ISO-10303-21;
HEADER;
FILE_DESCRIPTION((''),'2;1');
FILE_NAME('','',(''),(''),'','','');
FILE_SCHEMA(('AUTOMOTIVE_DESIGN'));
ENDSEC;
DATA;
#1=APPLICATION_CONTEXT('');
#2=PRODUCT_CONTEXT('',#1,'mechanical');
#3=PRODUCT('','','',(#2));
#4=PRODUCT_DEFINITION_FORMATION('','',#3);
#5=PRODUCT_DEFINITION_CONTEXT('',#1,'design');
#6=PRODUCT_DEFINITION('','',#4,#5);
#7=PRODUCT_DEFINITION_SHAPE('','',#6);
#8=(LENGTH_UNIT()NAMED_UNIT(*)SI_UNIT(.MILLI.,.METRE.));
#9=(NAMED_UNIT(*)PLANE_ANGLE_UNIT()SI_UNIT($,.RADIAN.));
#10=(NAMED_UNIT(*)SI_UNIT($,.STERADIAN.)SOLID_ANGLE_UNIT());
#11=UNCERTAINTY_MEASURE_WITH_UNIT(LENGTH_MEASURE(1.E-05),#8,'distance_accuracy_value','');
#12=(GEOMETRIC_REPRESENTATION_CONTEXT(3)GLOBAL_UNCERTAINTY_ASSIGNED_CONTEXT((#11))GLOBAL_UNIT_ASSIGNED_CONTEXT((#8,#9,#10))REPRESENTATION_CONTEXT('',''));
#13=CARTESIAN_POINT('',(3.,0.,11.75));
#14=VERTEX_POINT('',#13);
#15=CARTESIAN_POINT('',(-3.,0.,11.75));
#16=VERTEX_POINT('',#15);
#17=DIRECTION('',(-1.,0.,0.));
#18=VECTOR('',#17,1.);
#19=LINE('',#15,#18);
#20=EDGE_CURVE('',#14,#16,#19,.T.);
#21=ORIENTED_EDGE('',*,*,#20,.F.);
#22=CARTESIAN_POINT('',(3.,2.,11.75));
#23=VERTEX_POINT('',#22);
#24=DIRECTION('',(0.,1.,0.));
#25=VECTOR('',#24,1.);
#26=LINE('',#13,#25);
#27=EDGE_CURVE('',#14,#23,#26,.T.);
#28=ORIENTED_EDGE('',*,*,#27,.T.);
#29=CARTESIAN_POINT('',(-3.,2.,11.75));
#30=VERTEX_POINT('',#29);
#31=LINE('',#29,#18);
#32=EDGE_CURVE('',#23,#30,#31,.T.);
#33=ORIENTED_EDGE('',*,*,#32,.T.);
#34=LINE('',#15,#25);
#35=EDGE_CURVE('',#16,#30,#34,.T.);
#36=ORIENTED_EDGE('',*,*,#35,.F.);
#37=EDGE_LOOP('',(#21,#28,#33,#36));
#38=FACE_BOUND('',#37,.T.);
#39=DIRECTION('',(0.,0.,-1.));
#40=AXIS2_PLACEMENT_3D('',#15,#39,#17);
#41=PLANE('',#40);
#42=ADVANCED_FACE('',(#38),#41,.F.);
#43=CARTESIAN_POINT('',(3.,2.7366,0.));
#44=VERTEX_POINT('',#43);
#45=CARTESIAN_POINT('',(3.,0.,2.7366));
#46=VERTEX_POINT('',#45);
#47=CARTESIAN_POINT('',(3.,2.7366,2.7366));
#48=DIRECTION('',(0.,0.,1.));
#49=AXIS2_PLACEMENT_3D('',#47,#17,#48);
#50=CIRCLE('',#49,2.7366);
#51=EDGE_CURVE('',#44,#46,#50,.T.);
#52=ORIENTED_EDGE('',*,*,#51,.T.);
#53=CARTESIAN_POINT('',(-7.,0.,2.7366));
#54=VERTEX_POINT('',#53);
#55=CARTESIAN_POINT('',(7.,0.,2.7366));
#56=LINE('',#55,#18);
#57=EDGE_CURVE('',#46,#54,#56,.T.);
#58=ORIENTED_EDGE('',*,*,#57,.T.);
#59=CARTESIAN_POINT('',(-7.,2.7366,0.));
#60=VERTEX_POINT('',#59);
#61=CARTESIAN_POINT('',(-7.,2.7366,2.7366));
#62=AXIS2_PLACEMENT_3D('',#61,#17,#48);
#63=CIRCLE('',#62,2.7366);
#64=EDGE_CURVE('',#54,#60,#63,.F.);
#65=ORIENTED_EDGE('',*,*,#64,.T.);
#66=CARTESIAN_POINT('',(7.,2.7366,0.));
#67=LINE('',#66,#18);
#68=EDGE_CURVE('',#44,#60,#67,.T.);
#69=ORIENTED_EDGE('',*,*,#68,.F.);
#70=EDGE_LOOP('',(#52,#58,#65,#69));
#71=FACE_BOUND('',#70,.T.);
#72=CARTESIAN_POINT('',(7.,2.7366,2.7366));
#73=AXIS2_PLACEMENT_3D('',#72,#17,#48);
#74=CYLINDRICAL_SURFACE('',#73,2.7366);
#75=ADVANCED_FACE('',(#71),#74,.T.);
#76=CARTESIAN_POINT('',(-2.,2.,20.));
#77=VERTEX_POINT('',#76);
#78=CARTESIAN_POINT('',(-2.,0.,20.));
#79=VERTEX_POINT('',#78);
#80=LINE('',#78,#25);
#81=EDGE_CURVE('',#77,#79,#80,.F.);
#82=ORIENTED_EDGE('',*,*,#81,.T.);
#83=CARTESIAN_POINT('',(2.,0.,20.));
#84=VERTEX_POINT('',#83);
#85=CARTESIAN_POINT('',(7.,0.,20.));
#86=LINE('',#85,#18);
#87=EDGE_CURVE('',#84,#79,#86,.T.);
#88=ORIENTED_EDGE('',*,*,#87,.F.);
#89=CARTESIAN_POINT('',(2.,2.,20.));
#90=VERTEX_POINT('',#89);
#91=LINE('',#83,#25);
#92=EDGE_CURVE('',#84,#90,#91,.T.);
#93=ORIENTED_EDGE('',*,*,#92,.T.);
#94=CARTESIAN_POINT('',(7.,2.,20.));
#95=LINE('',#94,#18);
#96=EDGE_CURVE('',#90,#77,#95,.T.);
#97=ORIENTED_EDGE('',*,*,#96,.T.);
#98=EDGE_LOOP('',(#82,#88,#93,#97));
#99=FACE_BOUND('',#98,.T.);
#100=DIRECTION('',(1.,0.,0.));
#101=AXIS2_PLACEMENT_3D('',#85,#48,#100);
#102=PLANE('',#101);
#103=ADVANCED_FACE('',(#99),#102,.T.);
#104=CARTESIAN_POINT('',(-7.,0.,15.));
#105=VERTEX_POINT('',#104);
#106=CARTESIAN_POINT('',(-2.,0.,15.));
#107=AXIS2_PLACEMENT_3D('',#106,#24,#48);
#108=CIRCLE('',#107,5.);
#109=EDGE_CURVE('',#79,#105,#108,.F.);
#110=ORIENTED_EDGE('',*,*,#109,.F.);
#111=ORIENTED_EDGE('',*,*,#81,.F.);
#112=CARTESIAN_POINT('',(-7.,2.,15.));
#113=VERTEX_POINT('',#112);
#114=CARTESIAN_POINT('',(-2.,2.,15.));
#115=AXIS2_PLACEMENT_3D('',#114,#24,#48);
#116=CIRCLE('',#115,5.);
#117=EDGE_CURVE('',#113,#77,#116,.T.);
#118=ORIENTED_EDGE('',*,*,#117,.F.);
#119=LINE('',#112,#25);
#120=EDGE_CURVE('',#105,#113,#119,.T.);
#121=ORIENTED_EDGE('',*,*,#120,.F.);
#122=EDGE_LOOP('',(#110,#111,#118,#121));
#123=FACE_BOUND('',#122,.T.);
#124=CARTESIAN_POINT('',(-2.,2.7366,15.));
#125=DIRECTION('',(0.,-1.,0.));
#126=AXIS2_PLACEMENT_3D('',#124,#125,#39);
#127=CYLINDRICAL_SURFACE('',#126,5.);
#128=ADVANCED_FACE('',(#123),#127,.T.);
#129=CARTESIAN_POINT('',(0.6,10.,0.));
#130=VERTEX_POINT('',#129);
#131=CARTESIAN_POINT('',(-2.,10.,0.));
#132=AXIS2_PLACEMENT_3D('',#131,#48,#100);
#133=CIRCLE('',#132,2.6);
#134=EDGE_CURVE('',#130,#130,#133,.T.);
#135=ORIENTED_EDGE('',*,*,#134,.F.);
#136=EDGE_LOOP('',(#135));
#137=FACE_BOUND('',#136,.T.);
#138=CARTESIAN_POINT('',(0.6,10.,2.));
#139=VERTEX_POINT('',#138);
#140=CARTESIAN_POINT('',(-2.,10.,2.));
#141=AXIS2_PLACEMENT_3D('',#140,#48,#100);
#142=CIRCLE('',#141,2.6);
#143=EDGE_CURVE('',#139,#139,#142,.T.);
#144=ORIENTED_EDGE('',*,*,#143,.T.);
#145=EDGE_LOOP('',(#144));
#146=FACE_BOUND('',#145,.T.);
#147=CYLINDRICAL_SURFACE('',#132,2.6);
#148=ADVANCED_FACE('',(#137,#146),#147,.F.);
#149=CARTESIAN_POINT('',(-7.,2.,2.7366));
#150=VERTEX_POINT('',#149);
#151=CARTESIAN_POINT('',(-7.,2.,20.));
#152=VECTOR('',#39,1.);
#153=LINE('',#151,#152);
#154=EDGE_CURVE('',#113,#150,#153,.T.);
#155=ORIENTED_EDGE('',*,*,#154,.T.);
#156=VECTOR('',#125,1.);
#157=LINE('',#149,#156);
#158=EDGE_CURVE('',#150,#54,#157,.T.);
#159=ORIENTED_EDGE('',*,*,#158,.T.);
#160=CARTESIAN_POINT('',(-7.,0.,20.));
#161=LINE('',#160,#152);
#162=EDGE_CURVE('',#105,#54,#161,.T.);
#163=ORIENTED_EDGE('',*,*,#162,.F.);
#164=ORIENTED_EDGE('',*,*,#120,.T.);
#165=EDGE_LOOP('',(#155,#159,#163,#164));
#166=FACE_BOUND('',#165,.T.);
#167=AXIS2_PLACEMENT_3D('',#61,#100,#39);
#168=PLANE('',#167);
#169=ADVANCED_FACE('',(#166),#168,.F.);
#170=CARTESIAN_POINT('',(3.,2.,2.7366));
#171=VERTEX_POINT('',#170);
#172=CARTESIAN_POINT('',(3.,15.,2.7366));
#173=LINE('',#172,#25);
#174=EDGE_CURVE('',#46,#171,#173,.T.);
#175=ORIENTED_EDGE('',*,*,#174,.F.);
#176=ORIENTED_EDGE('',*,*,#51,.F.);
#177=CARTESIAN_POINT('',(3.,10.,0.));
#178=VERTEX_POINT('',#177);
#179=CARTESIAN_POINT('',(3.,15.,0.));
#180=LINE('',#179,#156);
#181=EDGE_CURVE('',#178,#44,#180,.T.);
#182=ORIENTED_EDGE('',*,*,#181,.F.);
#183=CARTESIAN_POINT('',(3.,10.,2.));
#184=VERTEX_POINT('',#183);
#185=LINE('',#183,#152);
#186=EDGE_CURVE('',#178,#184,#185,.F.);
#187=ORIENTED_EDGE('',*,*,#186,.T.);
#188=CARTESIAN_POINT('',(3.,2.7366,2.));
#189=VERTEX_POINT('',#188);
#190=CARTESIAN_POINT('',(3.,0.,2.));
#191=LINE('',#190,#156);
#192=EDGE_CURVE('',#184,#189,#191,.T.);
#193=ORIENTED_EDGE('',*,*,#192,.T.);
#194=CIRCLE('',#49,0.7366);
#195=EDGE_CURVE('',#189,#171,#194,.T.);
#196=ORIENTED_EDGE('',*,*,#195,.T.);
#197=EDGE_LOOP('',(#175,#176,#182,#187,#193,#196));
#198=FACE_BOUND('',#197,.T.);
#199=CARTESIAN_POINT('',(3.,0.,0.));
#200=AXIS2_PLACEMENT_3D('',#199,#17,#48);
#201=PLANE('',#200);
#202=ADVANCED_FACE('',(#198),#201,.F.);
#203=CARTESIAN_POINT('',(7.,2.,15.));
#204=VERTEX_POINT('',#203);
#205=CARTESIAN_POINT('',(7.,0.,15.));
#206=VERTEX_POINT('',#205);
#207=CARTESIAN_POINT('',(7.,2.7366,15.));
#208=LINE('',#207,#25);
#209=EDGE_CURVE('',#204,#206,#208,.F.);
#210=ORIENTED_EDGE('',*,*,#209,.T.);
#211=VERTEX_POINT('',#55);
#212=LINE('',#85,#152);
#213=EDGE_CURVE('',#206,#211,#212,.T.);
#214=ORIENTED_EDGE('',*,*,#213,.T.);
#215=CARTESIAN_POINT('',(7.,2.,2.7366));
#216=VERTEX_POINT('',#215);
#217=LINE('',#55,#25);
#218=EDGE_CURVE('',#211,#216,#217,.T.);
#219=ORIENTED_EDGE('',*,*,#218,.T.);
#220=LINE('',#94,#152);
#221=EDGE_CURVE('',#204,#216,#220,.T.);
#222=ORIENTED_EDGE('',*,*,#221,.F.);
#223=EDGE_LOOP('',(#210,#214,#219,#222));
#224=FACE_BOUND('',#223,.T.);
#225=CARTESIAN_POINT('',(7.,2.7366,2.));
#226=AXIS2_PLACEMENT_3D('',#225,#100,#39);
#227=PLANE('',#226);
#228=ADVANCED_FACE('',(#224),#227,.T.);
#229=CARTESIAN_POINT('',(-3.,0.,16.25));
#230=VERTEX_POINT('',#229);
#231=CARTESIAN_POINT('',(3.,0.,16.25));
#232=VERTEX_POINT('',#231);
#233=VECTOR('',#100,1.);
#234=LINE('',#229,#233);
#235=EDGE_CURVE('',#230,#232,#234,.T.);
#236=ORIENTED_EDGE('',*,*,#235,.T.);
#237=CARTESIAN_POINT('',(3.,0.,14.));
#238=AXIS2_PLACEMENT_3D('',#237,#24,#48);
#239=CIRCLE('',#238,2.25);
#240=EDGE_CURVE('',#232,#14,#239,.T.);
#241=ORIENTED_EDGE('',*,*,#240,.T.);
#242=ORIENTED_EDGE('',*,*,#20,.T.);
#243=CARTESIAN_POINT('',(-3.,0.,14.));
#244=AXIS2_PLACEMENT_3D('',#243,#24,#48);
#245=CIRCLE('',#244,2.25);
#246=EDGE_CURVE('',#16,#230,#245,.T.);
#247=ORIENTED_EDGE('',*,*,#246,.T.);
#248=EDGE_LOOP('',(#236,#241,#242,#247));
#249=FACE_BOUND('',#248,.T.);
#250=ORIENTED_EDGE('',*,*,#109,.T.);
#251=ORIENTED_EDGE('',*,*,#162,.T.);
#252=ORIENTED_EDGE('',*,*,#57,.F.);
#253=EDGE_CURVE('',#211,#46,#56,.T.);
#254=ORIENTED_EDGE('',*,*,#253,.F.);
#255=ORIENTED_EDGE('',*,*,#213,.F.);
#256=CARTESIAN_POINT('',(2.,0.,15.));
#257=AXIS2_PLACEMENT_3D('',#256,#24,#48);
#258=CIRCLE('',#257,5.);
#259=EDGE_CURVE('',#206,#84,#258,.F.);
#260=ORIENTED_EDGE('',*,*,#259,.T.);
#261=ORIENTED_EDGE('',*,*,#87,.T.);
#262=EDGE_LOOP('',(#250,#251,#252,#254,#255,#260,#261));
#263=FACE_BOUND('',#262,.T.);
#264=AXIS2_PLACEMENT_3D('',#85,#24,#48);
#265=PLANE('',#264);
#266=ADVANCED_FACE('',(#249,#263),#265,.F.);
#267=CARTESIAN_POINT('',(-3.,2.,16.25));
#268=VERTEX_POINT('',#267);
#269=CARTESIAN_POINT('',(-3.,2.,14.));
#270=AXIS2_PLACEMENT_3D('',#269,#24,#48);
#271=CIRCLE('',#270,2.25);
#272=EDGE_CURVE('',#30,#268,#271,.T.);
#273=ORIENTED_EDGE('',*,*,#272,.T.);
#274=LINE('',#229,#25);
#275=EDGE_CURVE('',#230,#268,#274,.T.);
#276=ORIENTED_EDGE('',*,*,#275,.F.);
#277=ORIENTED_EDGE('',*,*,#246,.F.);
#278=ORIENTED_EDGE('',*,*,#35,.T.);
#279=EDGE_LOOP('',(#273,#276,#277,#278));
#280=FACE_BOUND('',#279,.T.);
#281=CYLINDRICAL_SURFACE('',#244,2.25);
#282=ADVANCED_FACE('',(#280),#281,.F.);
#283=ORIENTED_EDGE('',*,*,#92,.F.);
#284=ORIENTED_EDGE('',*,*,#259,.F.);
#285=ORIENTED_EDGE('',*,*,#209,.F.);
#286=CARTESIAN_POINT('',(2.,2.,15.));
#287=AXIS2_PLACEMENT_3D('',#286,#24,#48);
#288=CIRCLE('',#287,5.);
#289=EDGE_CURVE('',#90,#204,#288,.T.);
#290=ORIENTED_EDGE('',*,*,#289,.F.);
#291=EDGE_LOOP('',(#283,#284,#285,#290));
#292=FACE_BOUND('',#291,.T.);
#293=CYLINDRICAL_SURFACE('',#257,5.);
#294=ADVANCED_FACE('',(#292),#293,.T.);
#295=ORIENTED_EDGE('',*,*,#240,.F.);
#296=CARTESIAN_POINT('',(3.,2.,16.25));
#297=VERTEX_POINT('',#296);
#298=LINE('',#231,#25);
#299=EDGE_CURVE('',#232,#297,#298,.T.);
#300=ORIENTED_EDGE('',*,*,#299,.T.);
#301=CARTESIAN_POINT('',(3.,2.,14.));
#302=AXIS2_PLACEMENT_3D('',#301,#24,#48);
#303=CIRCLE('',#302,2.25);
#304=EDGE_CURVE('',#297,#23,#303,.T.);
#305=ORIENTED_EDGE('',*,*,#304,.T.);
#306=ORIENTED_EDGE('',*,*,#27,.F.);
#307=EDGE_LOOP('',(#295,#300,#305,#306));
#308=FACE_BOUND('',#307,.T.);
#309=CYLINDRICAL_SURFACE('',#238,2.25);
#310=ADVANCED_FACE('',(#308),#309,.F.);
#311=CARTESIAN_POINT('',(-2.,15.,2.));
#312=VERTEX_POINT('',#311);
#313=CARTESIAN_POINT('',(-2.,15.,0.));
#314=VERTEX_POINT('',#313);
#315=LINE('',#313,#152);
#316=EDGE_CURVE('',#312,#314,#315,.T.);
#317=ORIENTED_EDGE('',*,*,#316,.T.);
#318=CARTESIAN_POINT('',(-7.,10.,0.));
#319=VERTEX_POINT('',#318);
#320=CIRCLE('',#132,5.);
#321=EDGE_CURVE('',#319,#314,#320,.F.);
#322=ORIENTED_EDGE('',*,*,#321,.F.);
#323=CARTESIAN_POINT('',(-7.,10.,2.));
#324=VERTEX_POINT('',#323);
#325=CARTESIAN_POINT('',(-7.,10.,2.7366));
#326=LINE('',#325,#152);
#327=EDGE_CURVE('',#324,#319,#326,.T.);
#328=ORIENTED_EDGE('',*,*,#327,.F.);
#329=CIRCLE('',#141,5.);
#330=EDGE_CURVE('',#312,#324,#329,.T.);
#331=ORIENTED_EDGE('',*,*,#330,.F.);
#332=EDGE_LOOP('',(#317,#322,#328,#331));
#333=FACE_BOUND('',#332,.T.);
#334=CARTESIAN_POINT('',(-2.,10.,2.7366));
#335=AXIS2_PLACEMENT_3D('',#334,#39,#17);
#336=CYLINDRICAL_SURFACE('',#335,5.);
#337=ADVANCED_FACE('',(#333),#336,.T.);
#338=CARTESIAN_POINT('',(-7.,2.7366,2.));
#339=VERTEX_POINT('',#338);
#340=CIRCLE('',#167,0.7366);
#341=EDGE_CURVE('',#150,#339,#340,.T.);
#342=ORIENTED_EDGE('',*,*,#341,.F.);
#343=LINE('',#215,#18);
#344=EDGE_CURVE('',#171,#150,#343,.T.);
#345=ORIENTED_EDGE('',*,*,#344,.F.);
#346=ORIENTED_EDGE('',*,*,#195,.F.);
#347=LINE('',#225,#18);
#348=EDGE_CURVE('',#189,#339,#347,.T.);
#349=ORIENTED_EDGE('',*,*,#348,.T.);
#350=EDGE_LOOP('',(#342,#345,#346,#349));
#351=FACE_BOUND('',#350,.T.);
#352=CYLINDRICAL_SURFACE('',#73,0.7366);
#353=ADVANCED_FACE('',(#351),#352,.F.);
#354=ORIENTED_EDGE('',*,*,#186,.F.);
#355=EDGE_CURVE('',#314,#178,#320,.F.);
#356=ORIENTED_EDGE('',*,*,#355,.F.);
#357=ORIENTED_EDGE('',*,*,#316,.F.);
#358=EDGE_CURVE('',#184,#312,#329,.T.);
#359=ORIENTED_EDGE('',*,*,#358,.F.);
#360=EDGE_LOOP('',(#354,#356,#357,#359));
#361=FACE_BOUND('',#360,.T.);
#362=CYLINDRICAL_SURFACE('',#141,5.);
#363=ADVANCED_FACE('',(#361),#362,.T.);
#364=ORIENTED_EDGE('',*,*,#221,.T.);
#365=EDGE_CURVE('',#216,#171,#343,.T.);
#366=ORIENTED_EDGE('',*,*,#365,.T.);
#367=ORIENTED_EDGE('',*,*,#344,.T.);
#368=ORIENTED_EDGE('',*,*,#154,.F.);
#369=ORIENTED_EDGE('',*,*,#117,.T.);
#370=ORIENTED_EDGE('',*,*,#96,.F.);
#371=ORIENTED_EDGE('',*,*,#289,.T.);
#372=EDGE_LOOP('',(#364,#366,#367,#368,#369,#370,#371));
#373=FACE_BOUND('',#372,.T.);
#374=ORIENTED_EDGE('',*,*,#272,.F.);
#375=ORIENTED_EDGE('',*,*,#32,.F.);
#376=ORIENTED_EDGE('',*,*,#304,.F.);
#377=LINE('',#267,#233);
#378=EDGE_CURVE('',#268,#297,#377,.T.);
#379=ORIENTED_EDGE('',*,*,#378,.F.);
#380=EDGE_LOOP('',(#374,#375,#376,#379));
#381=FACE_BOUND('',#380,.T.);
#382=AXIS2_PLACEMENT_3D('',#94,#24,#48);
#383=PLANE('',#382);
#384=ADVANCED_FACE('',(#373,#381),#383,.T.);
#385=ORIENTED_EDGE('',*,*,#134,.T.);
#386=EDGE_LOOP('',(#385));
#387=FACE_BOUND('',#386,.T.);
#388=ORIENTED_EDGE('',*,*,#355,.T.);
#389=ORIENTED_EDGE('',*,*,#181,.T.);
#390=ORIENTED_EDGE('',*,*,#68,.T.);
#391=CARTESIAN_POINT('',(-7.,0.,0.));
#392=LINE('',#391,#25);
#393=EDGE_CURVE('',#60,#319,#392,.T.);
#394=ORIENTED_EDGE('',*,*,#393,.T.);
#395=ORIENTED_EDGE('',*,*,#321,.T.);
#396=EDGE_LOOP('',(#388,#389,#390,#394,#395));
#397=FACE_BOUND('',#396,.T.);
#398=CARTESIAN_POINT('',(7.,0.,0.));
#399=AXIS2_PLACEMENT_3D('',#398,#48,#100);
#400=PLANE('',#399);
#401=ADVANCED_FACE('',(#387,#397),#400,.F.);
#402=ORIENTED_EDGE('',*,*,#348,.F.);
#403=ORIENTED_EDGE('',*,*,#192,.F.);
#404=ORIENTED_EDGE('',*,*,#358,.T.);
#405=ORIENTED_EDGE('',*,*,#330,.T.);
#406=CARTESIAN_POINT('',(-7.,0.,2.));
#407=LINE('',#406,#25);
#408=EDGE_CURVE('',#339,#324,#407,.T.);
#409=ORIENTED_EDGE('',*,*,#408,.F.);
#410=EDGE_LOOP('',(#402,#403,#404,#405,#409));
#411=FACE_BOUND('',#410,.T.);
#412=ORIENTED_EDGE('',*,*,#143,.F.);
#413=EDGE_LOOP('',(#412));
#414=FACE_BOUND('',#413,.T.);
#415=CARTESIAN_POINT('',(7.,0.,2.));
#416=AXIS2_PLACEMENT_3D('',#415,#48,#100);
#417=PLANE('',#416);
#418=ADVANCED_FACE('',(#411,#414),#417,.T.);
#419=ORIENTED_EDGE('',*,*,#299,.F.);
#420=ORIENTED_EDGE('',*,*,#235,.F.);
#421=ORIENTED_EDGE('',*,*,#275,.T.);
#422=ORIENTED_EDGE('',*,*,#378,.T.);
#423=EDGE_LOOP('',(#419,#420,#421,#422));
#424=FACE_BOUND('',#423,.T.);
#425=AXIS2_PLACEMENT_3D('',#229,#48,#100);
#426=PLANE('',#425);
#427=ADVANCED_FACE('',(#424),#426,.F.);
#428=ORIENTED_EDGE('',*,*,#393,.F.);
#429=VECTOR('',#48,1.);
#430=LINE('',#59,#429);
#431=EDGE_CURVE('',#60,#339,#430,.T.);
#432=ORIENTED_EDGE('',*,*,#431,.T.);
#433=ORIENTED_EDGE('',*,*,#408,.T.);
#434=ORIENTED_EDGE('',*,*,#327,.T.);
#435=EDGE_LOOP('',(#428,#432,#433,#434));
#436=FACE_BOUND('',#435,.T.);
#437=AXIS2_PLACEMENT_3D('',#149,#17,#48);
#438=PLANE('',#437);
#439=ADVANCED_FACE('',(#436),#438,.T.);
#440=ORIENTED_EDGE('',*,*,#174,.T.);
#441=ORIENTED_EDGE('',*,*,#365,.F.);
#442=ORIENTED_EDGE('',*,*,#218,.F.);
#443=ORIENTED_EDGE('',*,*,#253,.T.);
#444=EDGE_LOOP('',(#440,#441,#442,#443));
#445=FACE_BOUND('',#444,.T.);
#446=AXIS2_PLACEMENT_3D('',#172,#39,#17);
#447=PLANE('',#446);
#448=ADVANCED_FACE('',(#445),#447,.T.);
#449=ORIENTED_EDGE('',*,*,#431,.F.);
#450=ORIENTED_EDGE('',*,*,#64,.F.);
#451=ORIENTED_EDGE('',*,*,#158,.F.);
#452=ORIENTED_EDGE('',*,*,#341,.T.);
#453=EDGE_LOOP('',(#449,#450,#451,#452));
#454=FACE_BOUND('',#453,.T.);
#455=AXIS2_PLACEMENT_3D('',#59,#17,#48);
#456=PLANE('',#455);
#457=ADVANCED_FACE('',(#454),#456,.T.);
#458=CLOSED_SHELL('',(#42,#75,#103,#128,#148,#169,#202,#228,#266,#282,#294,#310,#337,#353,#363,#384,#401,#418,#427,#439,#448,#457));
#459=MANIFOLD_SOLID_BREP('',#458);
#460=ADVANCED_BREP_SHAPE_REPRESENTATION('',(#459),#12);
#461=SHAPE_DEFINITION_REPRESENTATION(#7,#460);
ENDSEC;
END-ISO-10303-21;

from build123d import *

# Parameters (mm, degrees)
SM_BASE_FLANGE_1_DEPTH = 7
CUT_EXTRUDE_1_DEPTH    = 25.859605789
SKETCH_4_W             = 2.7366
SKETCH_4_H             = 15
CUT_EXTRUDE_2_DEPTH    = 4
FILLET_1_R             = 5
SKETCH_5_R             = 2.6
CUT_EXTRUDE_3_DEPTH    = 25.454038521


# Sheet-metal steps are written as plain solids
with BuildPart() as part:
    # Sketch 1 → 基体-法兰1 (new, symmetric)
    with BuildSketch(Plane(origin=(0, 0, 0), x_dir=(0, 0, -1), z_dir=(1, 0, 0))):
        with BuildLine():
            Line((-20, 0), (-2.7366, 0))
            ThreePointArc((-2.7366, 0), (-0.801531583, 0.801531583), (0, 2.7366))
            Line((0, 2.7366), (0, 15))
            Line((0, 15), (-2, 15))
            Line((-2, 15), (-2, 2.7366))
            ThreePointArc((-2, 2.7366), (-2.215745145, 2.215745145), (-2.7366, 2))
            Line((-2.7366, 2), (-20, 2))
            Line((-20, 2), (-20, 0))
        make_face()
    extrude(amount=SM_BASE_FLANGE_1_DEPTH, both=True)

    # 草图3 → 切除-拉伸1 (cut, through all)
    with BuildSketch(Plane(origin=(0, 2, 0), x_dir=(1, 0, 0), z_dir=(0, 1, 0))):
        with BuildLine():
            Line((-3, -11.75), (3, -11.75))
            ThreePointArc((3, -11.75), (5.25, -14), (3, -16.25))
            Line((3, -16.25), (-3, -16.25))
            ThreePointArc((-3, -16.25), (-5.25, -14), (-3, -11.75))
        make_face()
    extrude(amount=-CUT_EXTRUDE_1_DEPTH, mode=Mode.SUBTRACT)

    # 草图4 → 切除-拉伸2 (cut)
    with BuildSketch(Plane.ZY.offset(-7)):
        with Locations((1.3683, 7.5)):
            Rectangle(SKETCH_4_W, SKETCH_4_H)
    extrude(amount=CUT_EXTRUDE_2_DEPTH, mode=Mode.SUBTRACT)

    # 圆角1
    fillet_1_edges = [part.edges().sort_by_distance(p)[0] for p in [
        (-7, 1, 20),
        (7, 1, 20),
        (3, 15, 1),
        (-7, 15, 1),
    ]]
    fillet(fillet_1_edges, radius=FILLET_1_R - 0.0001)  # a hair under: the kernel refuses the full size

    # 草图5 → 切除-拉伸3 (cut, through all)
    with BuildSketch(Plane.XY.offset(2)):
        with Locations((-2, 10)):
            Circle(SKETCH_5_R)
    extrude(amount=-CUT_EXTRUDE_3_DEPTH, mode=Mode.SUBTRACT)


solid = part.part
